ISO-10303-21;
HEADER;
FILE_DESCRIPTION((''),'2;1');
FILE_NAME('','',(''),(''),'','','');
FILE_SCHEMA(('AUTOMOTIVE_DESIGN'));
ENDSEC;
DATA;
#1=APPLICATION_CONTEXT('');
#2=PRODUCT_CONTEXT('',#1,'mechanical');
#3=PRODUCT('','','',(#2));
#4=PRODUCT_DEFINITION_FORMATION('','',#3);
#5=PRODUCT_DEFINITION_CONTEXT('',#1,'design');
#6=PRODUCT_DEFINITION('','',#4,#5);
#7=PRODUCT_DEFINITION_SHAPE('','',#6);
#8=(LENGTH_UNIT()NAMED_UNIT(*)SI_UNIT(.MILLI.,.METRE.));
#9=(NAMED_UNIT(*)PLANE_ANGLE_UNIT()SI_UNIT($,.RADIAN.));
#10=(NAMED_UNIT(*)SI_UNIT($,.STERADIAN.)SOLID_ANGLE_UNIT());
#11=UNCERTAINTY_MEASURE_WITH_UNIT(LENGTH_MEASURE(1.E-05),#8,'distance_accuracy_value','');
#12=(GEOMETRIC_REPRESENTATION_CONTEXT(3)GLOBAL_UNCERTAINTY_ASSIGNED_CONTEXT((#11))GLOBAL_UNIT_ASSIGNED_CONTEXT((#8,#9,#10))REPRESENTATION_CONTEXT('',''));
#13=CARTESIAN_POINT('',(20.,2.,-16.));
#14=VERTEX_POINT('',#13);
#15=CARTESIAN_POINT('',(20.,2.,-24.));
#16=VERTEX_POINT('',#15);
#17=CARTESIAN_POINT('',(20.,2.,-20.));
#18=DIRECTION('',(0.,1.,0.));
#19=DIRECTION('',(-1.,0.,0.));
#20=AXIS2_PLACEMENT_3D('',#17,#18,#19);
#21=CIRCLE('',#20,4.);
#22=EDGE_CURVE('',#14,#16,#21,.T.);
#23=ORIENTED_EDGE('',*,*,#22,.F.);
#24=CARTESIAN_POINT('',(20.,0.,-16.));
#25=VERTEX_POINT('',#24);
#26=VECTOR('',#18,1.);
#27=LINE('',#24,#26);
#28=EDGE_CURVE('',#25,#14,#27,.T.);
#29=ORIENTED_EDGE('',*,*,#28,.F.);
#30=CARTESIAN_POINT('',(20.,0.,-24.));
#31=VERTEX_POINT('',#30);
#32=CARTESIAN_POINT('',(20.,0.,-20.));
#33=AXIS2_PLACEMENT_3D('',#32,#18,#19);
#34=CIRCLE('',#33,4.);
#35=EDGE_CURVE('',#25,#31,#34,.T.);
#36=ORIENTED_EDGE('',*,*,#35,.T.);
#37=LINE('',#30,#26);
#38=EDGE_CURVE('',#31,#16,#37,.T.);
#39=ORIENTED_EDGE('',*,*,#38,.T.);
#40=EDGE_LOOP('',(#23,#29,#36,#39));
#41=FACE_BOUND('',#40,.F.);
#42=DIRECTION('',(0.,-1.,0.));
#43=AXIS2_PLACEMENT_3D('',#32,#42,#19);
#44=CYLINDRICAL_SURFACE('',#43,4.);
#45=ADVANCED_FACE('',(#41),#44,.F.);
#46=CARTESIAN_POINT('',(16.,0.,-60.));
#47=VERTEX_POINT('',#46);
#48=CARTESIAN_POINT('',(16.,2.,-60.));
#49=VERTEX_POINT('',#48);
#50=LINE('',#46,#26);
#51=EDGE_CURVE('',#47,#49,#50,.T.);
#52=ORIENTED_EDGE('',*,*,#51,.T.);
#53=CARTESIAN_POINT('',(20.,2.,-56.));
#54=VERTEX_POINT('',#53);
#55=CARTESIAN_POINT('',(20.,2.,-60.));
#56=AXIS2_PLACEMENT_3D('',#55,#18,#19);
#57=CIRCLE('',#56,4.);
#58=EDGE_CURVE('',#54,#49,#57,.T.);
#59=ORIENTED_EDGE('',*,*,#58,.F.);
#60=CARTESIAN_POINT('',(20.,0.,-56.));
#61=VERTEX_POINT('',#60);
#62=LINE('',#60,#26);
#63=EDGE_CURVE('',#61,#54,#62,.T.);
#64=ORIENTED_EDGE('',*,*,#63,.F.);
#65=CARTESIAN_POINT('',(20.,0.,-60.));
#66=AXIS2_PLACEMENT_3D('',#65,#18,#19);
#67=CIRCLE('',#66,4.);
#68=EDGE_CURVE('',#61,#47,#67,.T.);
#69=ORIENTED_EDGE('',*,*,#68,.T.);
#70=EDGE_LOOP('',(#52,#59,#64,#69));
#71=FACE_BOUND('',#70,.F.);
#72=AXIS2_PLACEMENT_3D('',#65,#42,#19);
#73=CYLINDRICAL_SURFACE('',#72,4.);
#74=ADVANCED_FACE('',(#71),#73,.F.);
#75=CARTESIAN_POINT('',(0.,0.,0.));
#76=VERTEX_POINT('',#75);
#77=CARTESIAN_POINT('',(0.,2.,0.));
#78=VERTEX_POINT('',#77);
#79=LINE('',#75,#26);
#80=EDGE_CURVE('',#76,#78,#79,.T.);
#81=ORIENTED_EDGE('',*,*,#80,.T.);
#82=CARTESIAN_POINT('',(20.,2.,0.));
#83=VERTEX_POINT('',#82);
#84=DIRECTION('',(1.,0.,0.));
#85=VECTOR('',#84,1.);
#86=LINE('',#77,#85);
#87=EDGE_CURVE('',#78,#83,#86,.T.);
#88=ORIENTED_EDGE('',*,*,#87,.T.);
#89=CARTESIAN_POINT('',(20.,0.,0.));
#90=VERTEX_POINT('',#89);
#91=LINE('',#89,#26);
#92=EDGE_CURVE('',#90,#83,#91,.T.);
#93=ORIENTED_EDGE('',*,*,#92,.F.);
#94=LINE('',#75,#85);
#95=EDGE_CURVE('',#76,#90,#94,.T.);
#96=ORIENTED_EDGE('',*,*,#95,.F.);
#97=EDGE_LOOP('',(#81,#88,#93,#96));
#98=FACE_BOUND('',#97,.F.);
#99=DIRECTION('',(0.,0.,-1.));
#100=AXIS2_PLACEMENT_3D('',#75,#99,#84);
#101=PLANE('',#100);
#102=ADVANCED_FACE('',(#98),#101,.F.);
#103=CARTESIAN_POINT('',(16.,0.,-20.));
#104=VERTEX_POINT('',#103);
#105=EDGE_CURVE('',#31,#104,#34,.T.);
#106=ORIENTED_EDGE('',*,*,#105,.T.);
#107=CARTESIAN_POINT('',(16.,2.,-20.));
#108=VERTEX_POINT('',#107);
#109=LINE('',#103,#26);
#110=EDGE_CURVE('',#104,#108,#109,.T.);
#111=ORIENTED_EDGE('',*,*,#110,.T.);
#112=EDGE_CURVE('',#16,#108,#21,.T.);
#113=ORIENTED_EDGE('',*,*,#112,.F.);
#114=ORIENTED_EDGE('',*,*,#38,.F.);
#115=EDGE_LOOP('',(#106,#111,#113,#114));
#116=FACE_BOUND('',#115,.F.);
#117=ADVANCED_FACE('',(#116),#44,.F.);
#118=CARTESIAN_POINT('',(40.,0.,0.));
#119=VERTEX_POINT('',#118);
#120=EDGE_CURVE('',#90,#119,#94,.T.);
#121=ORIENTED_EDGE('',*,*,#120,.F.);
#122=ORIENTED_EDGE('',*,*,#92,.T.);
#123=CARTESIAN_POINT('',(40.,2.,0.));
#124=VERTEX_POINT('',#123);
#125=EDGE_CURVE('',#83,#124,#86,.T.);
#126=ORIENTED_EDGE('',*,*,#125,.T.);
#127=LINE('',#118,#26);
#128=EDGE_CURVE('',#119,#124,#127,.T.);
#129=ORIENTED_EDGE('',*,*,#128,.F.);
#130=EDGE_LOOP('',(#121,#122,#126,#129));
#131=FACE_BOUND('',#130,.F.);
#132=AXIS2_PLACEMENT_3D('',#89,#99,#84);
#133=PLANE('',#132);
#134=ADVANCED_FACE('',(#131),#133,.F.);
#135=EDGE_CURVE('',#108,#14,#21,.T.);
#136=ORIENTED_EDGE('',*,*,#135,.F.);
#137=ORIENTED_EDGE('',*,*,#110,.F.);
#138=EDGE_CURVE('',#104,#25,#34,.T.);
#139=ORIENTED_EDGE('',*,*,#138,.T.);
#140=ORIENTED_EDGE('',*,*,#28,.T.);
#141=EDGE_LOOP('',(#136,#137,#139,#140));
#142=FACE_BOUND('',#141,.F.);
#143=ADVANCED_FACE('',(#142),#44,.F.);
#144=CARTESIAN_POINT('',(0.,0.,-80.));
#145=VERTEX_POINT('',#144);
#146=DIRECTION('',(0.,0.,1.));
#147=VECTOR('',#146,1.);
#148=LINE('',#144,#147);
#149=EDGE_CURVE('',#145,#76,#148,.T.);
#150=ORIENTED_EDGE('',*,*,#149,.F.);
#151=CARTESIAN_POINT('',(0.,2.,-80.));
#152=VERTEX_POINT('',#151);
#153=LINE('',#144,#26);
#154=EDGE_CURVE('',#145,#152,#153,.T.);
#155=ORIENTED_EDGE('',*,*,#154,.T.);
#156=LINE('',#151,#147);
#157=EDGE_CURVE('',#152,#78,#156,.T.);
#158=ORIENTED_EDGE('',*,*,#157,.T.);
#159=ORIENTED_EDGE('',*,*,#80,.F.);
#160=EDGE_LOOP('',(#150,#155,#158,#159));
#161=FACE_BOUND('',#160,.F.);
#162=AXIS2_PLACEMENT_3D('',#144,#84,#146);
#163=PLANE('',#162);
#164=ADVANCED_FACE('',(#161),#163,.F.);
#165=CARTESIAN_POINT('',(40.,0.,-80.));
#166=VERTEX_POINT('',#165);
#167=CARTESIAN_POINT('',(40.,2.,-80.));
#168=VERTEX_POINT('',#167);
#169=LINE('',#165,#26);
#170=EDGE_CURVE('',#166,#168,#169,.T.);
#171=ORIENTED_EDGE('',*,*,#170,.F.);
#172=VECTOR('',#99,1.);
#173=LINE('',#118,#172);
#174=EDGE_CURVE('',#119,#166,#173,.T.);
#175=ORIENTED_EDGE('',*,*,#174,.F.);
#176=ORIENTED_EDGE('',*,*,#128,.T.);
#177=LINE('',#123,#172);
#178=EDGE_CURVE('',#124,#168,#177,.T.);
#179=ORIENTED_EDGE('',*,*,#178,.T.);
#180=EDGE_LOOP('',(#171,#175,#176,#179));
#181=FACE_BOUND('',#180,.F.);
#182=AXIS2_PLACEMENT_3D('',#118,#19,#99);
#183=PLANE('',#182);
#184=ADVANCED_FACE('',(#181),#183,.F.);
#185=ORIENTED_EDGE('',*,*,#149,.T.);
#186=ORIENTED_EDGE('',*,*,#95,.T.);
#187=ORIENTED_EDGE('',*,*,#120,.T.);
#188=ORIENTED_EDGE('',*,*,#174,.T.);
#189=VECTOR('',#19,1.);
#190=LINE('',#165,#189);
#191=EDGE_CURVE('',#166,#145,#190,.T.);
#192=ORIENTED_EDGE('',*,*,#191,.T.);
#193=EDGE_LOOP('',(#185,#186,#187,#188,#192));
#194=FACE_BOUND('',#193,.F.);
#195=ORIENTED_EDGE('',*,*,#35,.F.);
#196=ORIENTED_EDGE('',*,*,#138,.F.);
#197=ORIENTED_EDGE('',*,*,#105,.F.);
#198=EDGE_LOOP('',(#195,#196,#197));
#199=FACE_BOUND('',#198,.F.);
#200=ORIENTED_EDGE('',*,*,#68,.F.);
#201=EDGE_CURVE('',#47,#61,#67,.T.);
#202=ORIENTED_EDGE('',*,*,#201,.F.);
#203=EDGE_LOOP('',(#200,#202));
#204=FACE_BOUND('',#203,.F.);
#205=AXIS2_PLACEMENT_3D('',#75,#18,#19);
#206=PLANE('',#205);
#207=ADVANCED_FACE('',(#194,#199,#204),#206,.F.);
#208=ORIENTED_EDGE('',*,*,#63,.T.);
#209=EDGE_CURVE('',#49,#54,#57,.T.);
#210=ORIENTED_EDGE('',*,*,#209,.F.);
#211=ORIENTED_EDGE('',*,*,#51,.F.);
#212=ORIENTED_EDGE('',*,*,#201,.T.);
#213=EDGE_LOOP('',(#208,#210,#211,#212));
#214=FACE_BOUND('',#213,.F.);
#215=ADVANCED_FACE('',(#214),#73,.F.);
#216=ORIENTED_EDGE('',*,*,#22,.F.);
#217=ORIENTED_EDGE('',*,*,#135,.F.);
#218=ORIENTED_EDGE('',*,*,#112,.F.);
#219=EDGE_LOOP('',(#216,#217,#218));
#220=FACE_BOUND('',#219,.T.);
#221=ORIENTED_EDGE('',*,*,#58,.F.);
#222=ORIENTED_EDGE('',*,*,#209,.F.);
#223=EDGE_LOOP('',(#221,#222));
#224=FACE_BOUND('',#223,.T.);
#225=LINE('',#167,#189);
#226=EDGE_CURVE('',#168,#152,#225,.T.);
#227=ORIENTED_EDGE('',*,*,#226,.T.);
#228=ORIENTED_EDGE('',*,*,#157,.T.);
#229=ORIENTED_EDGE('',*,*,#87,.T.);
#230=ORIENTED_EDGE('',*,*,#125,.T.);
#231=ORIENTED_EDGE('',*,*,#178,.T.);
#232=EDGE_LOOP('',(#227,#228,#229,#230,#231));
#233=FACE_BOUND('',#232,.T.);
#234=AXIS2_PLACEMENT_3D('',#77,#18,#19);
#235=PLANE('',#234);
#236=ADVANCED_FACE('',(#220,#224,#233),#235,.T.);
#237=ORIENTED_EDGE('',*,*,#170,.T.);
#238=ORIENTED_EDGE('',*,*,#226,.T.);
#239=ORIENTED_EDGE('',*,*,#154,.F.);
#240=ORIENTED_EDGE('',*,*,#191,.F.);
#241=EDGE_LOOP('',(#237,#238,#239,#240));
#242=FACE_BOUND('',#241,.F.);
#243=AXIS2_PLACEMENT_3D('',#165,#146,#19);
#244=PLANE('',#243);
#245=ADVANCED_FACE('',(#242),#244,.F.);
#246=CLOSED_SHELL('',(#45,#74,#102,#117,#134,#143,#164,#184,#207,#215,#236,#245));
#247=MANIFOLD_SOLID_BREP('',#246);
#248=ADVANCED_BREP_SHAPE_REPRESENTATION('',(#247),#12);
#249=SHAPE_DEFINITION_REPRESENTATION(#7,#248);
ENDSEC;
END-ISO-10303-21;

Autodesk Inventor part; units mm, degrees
ref_plane "YZ Plane" through (0, 0, 0) normal (1, 0, 0) x (0, 1, 0)
ref_plane "XZ Plane" through (0, 0, 0) normal (0, 1, 0) x (-1, 0, 0)
ref_plane "XY Plane" through (0, 0, 0) normal (0, 0, 1) x (1, 0, 0)
sketch "Эскиз1" plane through (0, 0, 0) normal (0, 1, 0) x (-1, 0, 0)
  line L0 (0, 0) -> (-40, 0)
  line L1 (-40, 0) -> (-40, -80)
  line L2 (-40, -80) -> (0, -80)
  line L3 (0, -80) -> (0, 0)
  line L4 (-20, 0) -> (-20, -20)
  line L5 (-20, -20) -> (-20, -60)
  circle A0 centre (-20, -20) radius 4
  circle A1 centre (-20, -60) radius 4
  dimension "d0" = 40
  dimension "d1" = 80
  dimension "d2" = 20
  dimension "d3" = 40
  dimension "d4" = 8
  dimension "d5" = 8
extrude "Выдавливание1" add sketch "Эскиз1" along normal blind 2
properties part number "Соединитель 40х80"
